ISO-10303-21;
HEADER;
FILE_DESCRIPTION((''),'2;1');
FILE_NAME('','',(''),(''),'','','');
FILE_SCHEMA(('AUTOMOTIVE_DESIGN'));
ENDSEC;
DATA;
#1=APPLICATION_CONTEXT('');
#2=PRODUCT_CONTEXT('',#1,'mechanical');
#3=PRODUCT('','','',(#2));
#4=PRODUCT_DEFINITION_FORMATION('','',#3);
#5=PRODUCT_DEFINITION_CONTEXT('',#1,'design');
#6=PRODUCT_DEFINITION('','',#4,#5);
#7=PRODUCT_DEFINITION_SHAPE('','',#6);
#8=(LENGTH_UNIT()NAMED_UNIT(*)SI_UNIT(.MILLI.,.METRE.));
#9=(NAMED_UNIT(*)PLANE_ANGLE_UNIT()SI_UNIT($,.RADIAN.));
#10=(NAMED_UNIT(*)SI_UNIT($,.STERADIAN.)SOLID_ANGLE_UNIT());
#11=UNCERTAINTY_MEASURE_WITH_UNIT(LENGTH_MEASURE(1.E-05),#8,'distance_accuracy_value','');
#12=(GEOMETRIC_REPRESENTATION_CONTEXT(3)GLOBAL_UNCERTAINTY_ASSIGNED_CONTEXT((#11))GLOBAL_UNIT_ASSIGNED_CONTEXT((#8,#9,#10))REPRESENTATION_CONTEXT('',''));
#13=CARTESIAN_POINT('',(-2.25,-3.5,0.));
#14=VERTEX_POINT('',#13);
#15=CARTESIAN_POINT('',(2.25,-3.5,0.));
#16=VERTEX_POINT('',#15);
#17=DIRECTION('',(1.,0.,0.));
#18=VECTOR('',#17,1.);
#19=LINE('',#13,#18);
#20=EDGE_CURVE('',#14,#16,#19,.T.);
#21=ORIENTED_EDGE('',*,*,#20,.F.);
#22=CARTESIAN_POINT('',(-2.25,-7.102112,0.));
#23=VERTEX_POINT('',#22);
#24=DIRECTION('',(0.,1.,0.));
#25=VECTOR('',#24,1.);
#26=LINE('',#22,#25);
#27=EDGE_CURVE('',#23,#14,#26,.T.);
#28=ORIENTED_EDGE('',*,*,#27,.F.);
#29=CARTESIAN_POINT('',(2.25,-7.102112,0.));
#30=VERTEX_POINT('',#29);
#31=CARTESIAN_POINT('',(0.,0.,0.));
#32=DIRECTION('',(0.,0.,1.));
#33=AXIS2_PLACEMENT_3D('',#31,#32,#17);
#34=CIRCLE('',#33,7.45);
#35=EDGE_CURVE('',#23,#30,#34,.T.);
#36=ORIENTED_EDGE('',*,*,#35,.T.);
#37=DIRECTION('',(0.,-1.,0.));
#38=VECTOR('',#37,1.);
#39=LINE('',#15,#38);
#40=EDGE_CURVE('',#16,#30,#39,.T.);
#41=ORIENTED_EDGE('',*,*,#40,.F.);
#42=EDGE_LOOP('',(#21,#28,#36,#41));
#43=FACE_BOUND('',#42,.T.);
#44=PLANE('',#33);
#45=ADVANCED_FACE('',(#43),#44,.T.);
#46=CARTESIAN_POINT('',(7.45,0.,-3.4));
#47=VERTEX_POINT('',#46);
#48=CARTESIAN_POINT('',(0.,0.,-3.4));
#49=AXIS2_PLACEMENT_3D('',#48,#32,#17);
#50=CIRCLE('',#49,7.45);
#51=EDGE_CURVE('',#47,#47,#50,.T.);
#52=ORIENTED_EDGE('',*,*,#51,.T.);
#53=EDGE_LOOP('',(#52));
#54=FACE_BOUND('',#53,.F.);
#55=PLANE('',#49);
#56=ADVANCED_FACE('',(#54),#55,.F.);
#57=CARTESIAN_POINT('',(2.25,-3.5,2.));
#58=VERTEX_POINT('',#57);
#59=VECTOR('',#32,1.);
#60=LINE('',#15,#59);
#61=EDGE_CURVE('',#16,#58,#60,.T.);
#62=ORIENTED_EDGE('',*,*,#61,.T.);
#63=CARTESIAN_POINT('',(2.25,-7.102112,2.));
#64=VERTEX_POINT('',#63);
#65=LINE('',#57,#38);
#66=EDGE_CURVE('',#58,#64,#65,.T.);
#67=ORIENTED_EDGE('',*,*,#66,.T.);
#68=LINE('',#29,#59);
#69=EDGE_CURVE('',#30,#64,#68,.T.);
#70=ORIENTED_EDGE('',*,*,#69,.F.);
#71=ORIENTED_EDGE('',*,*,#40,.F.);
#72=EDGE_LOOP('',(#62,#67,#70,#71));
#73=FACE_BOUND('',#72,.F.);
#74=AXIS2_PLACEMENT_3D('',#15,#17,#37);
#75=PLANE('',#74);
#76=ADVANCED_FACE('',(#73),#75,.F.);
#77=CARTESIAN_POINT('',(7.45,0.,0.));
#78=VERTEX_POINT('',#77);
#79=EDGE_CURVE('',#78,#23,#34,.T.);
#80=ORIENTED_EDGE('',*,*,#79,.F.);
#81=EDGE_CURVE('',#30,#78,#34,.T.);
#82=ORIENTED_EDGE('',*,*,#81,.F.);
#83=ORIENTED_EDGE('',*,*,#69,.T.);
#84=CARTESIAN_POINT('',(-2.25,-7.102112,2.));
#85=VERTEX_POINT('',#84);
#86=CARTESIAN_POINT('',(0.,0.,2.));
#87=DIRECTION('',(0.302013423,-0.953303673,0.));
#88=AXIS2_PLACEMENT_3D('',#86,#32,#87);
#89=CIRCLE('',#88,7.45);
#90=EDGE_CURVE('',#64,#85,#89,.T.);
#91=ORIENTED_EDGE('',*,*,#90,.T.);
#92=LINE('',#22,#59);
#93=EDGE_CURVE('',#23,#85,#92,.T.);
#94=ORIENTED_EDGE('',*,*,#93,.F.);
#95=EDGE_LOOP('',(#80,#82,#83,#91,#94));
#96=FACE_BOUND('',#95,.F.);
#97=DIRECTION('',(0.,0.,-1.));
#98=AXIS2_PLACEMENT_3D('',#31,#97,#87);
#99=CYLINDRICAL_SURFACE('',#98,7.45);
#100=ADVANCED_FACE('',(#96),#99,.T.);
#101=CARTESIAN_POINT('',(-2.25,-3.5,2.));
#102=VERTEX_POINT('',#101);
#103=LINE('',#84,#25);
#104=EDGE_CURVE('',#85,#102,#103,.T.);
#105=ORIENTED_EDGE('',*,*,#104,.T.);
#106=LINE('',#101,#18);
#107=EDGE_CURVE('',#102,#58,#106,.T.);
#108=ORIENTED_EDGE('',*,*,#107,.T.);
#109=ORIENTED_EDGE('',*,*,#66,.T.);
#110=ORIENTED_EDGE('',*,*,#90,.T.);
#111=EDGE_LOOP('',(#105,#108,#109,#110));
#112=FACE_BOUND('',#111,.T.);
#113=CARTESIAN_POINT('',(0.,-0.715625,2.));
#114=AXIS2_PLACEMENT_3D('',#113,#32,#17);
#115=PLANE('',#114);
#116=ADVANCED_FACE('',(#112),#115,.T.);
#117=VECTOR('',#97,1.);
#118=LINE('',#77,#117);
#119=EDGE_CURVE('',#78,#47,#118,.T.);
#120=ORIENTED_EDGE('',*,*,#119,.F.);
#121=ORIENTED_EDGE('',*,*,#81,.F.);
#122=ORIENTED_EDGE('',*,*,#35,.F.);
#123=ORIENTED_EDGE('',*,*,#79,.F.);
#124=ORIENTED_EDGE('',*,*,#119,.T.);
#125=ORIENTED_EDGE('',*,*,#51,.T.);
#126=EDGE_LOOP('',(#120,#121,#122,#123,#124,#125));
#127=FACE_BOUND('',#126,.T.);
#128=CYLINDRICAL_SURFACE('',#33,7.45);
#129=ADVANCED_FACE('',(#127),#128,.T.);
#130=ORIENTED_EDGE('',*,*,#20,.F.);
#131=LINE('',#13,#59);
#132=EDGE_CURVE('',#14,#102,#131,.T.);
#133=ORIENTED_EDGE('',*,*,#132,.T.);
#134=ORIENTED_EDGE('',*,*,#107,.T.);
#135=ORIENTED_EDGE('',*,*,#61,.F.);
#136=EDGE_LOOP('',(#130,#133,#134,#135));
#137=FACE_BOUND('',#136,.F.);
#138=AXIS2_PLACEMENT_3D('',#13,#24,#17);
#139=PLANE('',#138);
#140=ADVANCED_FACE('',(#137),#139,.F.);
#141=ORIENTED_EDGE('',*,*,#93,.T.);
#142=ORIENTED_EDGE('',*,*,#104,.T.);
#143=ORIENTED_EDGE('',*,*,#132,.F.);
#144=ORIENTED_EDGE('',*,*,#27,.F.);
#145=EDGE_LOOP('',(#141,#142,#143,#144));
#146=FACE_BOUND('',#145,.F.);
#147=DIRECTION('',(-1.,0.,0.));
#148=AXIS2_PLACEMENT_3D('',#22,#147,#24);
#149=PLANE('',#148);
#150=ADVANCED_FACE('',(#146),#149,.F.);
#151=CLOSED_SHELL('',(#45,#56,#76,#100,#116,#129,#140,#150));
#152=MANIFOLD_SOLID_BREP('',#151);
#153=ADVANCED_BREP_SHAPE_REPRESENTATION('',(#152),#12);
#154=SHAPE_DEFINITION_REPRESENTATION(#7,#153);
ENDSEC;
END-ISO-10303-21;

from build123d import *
from build123d import SkipClean  # not in build123d's __all__

# Parameters (mm, degrees)
F1_R     = 7.45
F2_DEPTH = 3.4
F3_DEPTH = 2


with BuildPart() as f2:
    # F1 (on Top) → F2 (new body)
    with BuildSketch(Plane.XY):
        Circle(F1_R)
    extrude(amount=-F2_DEPTH)

    # F0 (on Top) → F3 (join)
    with BuildSketch(Plane.XY):
        with BuildLine():
            Line((2.25, -6.5), (2.25, -7.1021123618))
            ThreePointArc((2.25, -7.1021123618), (0, 7.45), (-2.25, -7.1021123618))
            Line((-2.25, -7.1021123618), (-2.25, -6.5))
            Line((-2.25, -6.5), (-2.25, -3.5))
            Line((-2.25, -3.5), (2.25, -3.5))
            Line((2.25, -3.5), (2.25, -6.5))
        make_face()
    with SkipClean():  # cleaning this boolean's faces spoils the solid; the shape is the same uncleaned
        extrude(amount=F3_DEPTH)


solid = f2.part
